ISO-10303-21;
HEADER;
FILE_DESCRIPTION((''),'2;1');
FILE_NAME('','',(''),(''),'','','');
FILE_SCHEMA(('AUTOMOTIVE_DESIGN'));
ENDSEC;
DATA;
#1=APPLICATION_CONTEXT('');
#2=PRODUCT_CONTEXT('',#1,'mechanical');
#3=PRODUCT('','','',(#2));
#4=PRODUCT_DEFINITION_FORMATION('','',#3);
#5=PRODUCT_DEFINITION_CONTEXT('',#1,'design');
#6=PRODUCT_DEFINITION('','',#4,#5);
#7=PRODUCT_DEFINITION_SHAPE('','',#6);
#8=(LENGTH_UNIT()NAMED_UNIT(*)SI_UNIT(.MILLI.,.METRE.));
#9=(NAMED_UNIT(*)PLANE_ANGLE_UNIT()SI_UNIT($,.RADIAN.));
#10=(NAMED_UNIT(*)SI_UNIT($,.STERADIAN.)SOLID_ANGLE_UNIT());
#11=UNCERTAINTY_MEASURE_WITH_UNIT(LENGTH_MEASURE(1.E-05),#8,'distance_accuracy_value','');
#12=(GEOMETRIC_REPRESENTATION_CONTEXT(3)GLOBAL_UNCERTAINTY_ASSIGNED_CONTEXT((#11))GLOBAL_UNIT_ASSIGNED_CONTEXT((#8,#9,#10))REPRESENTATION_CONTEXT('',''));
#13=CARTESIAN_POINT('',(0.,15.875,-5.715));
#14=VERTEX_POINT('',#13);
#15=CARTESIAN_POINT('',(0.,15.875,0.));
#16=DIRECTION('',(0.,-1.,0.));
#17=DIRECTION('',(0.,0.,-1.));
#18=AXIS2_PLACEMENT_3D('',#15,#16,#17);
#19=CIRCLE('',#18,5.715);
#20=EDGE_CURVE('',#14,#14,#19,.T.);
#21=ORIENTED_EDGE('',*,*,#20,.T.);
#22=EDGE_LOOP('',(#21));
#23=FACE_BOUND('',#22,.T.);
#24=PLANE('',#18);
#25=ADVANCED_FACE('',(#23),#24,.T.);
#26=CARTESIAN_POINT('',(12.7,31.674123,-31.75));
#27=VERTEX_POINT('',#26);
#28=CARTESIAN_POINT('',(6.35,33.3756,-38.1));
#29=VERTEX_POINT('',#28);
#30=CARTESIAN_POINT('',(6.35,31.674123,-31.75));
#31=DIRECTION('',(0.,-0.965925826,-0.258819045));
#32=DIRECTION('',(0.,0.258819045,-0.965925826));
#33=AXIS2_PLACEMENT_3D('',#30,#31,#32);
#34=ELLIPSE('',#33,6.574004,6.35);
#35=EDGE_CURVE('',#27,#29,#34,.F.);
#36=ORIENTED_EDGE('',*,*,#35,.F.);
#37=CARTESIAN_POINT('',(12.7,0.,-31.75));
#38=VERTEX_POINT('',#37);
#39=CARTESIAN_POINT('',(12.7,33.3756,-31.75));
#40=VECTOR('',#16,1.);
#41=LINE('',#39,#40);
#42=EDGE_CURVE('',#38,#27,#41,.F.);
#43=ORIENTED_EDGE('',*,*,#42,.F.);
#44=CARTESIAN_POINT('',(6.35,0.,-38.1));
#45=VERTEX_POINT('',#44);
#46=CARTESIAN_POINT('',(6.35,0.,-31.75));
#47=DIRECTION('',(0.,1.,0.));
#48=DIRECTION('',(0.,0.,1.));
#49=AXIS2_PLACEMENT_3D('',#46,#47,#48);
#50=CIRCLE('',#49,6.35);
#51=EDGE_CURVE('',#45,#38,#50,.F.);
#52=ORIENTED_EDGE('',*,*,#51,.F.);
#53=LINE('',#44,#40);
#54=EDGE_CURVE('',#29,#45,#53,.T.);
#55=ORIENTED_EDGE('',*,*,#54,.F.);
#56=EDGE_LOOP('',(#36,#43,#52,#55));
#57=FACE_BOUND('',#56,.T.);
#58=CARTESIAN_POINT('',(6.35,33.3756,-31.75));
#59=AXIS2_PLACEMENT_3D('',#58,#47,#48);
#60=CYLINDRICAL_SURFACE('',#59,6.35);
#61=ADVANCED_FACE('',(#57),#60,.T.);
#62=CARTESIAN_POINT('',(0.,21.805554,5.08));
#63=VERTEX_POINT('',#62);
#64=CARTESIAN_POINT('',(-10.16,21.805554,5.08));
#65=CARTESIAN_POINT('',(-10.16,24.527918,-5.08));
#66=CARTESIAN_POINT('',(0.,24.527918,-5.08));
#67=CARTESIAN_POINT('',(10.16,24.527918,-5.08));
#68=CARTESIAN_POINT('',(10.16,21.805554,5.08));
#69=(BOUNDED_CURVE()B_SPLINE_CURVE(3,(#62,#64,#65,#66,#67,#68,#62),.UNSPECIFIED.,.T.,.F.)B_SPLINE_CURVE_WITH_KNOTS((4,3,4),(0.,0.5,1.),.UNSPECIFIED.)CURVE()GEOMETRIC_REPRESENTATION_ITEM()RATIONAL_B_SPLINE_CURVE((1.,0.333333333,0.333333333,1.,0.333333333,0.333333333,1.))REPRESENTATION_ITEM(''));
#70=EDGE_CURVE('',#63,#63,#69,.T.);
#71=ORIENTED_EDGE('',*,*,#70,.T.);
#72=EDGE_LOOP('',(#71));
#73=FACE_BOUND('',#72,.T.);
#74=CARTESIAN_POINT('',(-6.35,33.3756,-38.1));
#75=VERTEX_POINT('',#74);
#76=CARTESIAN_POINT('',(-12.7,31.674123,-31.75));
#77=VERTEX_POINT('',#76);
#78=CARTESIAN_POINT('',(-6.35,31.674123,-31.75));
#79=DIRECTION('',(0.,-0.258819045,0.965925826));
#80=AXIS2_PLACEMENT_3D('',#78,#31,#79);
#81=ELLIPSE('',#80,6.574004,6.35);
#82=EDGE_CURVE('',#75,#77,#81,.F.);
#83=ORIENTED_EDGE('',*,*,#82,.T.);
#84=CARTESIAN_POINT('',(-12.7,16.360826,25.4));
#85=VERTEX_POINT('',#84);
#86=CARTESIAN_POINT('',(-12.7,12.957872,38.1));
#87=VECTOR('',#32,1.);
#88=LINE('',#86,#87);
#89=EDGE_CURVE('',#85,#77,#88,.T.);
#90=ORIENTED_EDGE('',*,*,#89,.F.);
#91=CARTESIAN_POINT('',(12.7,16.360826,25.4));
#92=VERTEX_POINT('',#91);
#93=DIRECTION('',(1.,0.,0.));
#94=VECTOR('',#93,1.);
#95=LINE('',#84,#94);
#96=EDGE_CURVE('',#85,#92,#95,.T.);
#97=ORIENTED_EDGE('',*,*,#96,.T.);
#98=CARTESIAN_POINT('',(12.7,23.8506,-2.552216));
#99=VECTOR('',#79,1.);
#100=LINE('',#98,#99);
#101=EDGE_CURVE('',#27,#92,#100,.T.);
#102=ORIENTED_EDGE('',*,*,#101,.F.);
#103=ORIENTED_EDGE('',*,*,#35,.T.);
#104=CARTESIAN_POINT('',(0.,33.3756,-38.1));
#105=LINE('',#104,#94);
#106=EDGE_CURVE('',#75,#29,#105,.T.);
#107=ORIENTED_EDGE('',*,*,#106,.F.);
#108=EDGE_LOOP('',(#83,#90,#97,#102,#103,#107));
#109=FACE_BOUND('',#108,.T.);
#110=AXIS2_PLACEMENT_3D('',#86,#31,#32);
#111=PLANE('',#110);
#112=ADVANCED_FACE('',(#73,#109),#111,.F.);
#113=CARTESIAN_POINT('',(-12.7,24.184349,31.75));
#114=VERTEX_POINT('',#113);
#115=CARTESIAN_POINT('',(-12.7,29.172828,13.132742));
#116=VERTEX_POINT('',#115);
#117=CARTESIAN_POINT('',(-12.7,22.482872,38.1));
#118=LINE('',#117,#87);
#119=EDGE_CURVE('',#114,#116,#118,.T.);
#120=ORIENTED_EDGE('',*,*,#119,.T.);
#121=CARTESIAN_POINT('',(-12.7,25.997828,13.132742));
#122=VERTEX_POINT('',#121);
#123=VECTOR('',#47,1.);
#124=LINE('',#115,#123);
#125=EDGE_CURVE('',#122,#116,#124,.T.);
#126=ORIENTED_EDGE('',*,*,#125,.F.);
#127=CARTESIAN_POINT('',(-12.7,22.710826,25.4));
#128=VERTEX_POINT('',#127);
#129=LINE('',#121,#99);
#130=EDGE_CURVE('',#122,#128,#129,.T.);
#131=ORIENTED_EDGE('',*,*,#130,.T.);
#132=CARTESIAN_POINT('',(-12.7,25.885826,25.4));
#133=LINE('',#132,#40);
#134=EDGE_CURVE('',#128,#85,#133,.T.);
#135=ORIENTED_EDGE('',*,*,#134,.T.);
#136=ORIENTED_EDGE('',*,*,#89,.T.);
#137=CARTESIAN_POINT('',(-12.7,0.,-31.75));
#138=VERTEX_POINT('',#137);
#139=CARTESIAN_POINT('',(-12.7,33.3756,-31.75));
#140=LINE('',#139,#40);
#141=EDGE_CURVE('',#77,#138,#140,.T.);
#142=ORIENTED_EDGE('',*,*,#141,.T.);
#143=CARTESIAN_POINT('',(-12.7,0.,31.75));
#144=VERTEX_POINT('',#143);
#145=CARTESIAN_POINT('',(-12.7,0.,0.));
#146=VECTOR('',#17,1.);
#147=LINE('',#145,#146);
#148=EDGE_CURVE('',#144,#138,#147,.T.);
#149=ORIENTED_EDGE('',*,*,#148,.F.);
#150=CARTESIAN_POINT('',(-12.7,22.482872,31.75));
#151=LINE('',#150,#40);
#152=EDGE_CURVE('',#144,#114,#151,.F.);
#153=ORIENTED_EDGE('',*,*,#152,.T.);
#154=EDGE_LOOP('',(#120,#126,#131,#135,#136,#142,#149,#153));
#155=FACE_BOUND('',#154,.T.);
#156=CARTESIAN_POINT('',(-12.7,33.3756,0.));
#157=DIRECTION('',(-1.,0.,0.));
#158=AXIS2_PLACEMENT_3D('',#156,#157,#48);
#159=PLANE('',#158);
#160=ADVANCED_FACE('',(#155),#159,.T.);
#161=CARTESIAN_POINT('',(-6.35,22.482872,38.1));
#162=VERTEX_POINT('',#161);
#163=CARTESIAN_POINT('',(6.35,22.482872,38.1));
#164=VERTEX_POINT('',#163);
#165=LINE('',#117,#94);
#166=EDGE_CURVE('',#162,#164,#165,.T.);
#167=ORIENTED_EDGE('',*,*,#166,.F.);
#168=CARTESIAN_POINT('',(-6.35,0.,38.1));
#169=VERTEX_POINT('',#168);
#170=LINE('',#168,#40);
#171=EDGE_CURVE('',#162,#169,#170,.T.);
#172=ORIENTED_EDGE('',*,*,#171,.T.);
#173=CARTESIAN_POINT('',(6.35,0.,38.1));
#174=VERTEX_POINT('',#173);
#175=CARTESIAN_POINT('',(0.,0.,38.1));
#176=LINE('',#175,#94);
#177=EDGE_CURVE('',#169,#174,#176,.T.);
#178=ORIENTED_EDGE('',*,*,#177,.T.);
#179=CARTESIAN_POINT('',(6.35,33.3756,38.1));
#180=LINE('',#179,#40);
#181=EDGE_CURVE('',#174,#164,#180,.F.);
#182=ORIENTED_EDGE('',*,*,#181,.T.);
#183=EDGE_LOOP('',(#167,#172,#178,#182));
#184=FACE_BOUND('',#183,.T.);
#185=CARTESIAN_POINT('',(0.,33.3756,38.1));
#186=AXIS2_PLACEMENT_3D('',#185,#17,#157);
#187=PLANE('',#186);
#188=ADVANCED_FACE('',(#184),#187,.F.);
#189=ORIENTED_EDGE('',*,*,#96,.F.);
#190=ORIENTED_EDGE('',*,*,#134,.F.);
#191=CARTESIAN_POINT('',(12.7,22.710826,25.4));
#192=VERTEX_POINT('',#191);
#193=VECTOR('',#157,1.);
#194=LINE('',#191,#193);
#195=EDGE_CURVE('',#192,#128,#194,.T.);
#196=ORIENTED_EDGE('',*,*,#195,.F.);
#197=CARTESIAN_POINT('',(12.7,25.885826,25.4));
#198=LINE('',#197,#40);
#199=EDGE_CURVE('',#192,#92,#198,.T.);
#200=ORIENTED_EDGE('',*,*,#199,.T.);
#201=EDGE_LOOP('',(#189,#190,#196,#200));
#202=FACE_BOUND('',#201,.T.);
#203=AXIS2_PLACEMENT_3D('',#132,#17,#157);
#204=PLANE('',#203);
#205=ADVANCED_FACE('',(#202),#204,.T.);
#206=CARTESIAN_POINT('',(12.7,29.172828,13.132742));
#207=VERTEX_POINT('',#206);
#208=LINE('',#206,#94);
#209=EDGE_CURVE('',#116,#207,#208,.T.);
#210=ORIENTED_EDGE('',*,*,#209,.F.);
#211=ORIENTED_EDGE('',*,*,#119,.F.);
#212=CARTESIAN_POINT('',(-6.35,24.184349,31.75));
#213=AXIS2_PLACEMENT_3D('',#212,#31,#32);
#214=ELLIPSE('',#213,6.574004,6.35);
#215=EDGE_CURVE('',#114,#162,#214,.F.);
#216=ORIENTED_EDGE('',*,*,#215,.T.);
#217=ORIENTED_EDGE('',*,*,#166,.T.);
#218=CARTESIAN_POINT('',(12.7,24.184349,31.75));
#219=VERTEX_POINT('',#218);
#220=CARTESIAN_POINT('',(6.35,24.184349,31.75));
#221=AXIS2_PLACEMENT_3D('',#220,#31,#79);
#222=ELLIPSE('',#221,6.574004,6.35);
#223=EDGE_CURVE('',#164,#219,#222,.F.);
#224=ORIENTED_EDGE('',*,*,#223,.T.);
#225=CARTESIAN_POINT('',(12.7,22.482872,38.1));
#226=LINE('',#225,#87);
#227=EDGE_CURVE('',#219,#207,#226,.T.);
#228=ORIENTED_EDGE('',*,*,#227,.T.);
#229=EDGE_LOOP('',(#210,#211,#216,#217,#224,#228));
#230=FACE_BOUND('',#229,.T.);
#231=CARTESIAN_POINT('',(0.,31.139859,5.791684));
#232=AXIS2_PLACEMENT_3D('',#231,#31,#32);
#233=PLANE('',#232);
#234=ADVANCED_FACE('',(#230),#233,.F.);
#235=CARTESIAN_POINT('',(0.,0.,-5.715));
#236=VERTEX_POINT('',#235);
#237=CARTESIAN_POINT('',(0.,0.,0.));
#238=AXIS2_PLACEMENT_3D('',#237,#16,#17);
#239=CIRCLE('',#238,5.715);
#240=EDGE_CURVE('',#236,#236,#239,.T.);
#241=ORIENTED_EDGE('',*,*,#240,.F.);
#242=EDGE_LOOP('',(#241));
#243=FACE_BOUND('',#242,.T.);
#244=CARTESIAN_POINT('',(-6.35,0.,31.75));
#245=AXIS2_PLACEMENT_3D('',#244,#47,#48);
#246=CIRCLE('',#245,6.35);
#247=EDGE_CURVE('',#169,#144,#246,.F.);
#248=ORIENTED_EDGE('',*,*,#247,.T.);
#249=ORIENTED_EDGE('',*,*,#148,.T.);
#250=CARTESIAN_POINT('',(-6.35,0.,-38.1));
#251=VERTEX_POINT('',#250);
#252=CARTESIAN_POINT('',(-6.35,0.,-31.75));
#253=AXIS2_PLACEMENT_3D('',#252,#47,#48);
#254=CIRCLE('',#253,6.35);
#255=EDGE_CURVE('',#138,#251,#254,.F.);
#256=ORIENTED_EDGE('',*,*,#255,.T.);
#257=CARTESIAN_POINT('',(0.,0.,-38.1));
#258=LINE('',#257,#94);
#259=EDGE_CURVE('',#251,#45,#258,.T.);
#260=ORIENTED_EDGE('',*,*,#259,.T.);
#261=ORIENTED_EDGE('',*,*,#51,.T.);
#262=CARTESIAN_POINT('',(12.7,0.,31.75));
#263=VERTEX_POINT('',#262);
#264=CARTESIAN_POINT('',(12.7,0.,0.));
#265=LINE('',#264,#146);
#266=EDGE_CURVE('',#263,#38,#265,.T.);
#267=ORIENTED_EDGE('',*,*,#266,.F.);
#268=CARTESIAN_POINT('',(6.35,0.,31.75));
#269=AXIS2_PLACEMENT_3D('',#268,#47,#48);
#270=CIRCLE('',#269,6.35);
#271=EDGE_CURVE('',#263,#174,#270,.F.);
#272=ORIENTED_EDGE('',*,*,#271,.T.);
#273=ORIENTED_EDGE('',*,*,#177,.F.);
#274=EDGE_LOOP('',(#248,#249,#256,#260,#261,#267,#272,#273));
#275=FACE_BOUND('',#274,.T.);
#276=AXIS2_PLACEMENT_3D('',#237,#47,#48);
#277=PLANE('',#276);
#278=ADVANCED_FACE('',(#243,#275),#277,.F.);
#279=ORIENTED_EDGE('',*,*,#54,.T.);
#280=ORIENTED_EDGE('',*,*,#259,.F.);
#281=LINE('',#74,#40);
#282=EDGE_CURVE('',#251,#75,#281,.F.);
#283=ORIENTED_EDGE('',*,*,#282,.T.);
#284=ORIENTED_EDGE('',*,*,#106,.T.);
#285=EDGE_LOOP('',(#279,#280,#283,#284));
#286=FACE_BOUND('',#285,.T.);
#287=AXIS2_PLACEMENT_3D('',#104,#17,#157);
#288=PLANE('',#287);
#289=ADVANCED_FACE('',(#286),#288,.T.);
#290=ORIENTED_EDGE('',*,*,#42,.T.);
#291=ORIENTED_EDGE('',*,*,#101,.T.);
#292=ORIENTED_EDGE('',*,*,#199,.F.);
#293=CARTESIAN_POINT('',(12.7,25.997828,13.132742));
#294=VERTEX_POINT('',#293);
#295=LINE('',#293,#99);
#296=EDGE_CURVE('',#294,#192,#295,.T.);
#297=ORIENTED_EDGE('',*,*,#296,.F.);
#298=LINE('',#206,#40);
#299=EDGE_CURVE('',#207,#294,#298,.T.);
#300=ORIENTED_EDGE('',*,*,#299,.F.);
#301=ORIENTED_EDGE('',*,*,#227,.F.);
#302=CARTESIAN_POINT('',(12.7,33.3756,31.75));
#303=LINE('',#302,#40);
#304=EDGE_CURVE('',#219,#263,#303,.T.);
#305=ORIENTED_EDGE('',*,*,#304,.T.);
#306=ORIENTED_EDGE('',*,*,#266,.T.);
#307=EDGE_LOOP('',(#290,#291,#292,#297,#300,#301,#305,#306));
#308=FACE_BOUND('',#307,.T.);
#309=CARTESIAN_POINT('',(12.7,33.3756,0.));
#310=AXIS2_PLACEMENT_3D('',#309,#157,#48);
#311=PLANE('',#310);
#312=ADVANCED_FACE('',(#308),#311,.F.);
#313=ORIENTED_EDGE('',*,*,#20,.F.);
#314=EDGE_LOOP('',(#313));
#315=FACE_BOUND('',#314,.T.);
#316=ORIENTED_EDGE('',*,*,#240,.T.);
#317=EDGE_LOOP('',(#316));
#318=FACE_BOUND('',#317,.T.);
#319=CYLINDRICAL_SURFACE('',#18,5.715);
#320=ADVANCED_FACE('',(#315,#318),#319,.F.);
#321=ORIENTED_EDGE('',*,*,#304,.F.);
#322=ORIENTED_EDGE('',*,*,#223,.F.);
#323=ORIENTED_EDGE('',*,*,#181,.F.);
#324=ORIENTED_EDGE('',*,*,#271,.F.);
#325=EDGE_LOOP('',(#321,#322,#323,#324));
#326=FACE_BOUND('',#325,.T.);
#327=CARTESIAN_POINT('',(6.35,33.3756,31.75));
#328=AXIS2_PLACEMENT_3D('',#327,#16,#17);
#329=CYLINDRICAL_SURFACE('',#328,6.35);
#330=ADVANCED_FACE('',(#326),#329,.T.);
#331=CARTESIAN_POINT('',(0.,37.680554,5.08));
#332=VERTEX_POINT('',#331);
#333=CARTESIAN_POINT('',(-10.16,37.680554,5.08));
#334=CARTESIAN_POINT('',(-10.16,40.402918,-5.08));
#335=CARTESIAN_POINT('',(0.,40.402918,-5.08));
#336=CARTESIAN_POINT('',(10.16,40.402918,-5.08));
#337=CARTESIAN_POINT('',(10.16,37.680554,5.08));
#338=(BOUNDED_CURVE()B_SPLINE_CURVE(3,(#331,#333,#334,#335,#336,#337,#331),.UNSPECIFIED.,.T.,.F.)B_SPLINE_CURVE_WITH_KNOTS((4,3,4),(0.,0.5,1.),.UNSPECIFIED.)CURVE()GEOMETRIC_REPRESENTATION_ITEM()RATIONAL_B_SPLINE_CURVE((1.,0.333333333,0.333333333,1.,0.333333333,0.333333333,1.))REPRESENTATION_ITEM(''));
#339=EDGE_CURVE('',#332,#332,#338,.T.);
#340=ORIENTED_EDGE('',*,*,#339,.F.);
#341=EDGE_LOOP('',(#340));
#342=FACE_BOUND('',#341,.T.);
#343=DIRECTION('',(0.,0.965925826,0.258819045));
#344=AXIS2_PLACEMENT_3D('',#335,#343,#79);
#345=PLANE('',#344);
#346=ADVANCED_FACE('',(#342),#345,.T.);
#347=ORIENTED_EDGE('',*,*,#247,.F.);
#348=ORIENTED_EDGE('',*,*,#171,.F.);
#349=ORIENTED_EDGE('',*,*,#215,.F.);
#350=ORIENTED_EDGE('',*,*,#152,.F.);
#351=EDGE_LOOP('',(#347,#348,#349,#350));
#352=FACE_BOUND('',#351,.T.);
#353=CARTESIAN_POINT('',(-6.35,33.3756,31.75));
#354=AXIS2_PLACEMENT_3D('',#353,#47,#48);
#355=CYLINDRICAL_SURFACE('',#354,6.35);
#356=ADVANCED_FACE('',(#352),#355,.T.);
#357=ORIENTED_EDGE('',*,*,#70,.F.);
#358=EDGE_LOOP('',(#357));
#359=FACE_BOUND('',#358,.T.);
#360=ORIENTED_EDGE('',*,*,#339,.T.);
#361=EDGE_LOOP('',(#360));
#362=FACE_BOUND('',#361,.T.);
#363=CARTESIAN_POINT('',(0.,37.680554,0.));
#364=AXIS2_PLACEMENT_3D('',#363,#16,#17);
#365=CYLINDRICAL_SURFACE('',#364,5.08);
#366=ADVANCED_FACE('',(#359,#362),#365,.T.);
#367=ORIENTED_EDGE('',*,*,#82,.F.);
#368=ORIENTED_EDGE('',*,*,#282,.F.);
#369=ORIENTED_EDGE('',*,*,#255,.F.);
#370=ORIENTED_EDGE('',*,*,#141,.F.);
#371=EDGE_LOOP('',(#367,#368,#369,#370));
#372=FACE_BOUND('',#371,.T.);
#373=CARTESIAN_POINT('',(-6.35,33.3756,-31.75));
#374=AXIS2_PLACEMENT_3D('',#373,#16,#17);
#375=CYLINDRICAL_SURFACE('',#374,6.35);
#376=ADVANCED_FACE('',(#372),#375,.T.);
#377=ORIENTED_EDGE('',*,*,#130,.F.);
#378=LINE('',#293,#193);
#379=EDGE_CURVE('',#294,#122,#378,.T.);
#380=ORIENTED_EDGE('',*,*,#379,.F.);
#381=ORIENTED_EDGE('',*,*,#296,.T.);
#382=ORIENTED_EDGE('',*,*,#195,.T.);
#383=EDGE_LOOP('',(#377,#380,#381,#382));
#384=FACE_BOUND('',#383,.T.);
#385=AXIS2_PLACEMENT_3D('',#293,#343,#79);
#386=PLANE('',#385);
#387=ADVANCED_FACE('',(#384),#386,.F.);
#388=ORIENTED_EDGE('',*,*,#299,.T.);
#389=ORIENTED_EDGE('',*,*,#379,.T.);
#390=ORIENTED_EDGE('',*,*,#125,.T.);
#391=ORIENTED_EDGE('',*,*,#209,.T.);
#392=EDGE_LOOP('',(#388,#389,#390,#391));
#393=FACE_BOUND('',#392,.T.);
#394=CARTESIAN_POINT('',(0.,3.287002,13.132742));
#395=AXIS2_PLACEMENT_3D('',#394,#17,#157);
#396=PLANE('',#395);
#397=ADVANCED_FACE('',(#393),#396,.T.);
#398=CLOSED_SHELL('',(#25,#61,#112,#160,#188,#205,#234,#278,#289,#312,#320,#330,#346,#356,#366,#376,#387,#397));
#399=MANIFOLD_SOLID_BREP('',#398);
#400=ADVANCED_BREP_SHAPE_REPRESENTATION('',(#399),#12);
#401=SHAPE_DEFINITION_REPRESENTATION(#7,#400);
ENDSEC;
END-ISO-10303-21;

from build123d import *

# Parameters (mm, degrees)
SKETCH1_W               = 25.4
SKETCH1_H               = 76.2
BOSS_EXTRUDE1_DEPTH     = 33.3756
CUT_EXTRUDE2_DEPTH      = 57.663045059
CUT_EXTRUDE2_DEPTH_BACK = 57.663045059
BOSS_EXTRUDE2_REACH     = 63.744
SKETCH1_5_W             = 25.4
SKETCH1_5_H             = 12.7
SKETCH7_W               = 25.4
SKETCH7_H               = 3.175
BOSS_EXTRUDE3_DEPTH     = 12.7
FILLET1_R               = 6.35
BOSS_EXTRUDE4_REACH     = 70.094
SKETCH8_R               = 5.08
SKETCH8_3_R             = 5.715
CUT_EXTRUDE4_DEPTH      = 15.875


with BuildPart() as part:
    # Sketch1 → Boss-Extrude1 (new body)
    with BuildSketch(Plane(origin=(0, 0, 0), x_dir=(1, 0, 0), z_dir=(0, 1, 0))):
        Rectangle(SKETCH1_W, SKETCH1_H)
    extrude(amount=BOSS_EXTRUDE1_DEPTH)

    # Sketch4 → Cut-Extrude2 (cut, two sides: drawn at the far end of the back side and taken through both)
    with BuildSketch(Plane(origin=(12.7, 0, 0), x_dir=(0, 0, -1), z_dir=(1, 0, 0)).offset(-CUT_EXTRUDE2_DEPTH_BACK)):
        Polygon((38.1, 33.3756), (-38.1, 33.3756), (-38.1, 12.957871537), align=None)
    extrude(amount=CUT_EXTRUDE2_DEPTH + CUT_EXTRUDE2_DEPTH_BACK, mode=Mode.SUBTRACT)

    # Boss-Extrude2: from a plane face, 63.744 long prism both ways, kept between that surface and its translate by the depth
    boss_extrude2_start = Plane(origin=(-12.7, 12.957871537, 38.1), z_dir=(0, -0.9659258262890681, -0.2588190451025217)) * Box(256.976, 256.976, 128.488, align=(Align.CENTER, Align.CENTER, Align.MIN), mode=Mode.PRIVATE)
    boss_extrude2_end = Plane(origin=(-12.7, 22.482871537, 38.1), z_dir=(0, -0.9659258262890681, -0.2588190451025217)) * Box(256.976, 256.976, 128.488, align=(Align.CENTER, Align.CENTER, Align.MIN), mode=Mode.PRIVATE)
    # Sketch1<5> → Boss-Extrude2 (add, from a surface)
    with BuildSketch(Plane(origin=(0, 0, 0), x_dir=(1, 0, 0), z_dir=(0, 1, 0)), mode=Mode.PRIVATE) as boss_extrude2_sk1:
        with Locations((0, -31.75)):
            Rectangle(SKETCH1_5_W, SKETCH1_5_H)
    boss_extrude2_tool1 = extrude(boss_extrude2_sk1.sketch, amount=BOSS_EXTRUDE2_REACH, both=True, mode=Mode.PRIVATE)
    add(((boss_extrude2_tool1 - boss_extrude2_start) & boss_extrude2_end).solids().sort_by_distance((-3.175, 25.718952, -9.525))[0])

    # Sketch7 → Boss-Extrude3 (add, along a direction that is not the sketch's normal)
    with BuildSketch(Plane(origin=(0, 0, 25.4), x_dir=(-1, 0, 0), z_dir=(0, 0, -1))):
        with Locations((0, 24.298326281)):
            Rectangle(SKETCH7_W, SKETCH7_H)
    extrude(amount=BOSS_EXTRUDE3_DEPTH, dir=(0, 0.2588190451025216, -0.965925826289068))

    # Fillet1
    fillet1_edges = [part.edges().sort_by_distance(p)[0] for p in [
        (-12.7, 16.6878, -38.1),
        (-12.7, 11.241435768, 38.1),
        (12.7, 16.6878, -38.1),
        (12.7, 11.241435768, 38.1),
    ]]
    fillet(fillet1_edges, radius=FILLET1_R)

    # Boss-Extrude4: from a plane face, 70.094 long prism both ways, kept between that surface and its translate by the depth
    boss_extrude4_start = Plane(origin=(-12.7, 12.957871537, 38.1), z_dir=(0, -0.9659258262890681, -0.2588190451025217)) * Box(282.376, 282.376, 141.188, align=(Align.CENTER, Align.CENTER, Align.MIN), mode=Mode.PRIVATE)
    boss_extrude4_end = Plane(origin=(-12.7, 28.832871537, 38.1), z_dir=(0, -0.9659258262890681, -0.2588190451025217)) * Box(282.376, 282.376, 141.188, align=(Align.CENTER, Align.CENTER, Align.MIN), mode=Mode.PRIVATE)
    # Sketch8 → Boss-Extrude4 (add, from a surface)
    with BuildSketch(Plane.XZ, mode=Mode.PRIVATE) as boss_extrude4_sk1:
        Circle(SKETCH8_R)
    boss_extrude4_tool1 = extrude(boss_extrude4_sk1.sketch, amount=BOSS_EXTRUDE4_REACH, both=True, mode=Mode.PRIVATE)
    add(((boss_extrude4_tool1 - boss_extrude4_start) & boss_extrude4_end).solids().sort_by_distance((-1.058333, 28.53042, -20.017543))[0])

    # Sketch8<3> → Cut-Extrude4 (cut)
    with BuildSketch(Plane.XZ):
        Circle(SKETCH8_3_R)
    extrude(amount=-CUT_EXTRUDE4_DEPTH, mode=Mode.SUBTRACT)


solid = part.part
